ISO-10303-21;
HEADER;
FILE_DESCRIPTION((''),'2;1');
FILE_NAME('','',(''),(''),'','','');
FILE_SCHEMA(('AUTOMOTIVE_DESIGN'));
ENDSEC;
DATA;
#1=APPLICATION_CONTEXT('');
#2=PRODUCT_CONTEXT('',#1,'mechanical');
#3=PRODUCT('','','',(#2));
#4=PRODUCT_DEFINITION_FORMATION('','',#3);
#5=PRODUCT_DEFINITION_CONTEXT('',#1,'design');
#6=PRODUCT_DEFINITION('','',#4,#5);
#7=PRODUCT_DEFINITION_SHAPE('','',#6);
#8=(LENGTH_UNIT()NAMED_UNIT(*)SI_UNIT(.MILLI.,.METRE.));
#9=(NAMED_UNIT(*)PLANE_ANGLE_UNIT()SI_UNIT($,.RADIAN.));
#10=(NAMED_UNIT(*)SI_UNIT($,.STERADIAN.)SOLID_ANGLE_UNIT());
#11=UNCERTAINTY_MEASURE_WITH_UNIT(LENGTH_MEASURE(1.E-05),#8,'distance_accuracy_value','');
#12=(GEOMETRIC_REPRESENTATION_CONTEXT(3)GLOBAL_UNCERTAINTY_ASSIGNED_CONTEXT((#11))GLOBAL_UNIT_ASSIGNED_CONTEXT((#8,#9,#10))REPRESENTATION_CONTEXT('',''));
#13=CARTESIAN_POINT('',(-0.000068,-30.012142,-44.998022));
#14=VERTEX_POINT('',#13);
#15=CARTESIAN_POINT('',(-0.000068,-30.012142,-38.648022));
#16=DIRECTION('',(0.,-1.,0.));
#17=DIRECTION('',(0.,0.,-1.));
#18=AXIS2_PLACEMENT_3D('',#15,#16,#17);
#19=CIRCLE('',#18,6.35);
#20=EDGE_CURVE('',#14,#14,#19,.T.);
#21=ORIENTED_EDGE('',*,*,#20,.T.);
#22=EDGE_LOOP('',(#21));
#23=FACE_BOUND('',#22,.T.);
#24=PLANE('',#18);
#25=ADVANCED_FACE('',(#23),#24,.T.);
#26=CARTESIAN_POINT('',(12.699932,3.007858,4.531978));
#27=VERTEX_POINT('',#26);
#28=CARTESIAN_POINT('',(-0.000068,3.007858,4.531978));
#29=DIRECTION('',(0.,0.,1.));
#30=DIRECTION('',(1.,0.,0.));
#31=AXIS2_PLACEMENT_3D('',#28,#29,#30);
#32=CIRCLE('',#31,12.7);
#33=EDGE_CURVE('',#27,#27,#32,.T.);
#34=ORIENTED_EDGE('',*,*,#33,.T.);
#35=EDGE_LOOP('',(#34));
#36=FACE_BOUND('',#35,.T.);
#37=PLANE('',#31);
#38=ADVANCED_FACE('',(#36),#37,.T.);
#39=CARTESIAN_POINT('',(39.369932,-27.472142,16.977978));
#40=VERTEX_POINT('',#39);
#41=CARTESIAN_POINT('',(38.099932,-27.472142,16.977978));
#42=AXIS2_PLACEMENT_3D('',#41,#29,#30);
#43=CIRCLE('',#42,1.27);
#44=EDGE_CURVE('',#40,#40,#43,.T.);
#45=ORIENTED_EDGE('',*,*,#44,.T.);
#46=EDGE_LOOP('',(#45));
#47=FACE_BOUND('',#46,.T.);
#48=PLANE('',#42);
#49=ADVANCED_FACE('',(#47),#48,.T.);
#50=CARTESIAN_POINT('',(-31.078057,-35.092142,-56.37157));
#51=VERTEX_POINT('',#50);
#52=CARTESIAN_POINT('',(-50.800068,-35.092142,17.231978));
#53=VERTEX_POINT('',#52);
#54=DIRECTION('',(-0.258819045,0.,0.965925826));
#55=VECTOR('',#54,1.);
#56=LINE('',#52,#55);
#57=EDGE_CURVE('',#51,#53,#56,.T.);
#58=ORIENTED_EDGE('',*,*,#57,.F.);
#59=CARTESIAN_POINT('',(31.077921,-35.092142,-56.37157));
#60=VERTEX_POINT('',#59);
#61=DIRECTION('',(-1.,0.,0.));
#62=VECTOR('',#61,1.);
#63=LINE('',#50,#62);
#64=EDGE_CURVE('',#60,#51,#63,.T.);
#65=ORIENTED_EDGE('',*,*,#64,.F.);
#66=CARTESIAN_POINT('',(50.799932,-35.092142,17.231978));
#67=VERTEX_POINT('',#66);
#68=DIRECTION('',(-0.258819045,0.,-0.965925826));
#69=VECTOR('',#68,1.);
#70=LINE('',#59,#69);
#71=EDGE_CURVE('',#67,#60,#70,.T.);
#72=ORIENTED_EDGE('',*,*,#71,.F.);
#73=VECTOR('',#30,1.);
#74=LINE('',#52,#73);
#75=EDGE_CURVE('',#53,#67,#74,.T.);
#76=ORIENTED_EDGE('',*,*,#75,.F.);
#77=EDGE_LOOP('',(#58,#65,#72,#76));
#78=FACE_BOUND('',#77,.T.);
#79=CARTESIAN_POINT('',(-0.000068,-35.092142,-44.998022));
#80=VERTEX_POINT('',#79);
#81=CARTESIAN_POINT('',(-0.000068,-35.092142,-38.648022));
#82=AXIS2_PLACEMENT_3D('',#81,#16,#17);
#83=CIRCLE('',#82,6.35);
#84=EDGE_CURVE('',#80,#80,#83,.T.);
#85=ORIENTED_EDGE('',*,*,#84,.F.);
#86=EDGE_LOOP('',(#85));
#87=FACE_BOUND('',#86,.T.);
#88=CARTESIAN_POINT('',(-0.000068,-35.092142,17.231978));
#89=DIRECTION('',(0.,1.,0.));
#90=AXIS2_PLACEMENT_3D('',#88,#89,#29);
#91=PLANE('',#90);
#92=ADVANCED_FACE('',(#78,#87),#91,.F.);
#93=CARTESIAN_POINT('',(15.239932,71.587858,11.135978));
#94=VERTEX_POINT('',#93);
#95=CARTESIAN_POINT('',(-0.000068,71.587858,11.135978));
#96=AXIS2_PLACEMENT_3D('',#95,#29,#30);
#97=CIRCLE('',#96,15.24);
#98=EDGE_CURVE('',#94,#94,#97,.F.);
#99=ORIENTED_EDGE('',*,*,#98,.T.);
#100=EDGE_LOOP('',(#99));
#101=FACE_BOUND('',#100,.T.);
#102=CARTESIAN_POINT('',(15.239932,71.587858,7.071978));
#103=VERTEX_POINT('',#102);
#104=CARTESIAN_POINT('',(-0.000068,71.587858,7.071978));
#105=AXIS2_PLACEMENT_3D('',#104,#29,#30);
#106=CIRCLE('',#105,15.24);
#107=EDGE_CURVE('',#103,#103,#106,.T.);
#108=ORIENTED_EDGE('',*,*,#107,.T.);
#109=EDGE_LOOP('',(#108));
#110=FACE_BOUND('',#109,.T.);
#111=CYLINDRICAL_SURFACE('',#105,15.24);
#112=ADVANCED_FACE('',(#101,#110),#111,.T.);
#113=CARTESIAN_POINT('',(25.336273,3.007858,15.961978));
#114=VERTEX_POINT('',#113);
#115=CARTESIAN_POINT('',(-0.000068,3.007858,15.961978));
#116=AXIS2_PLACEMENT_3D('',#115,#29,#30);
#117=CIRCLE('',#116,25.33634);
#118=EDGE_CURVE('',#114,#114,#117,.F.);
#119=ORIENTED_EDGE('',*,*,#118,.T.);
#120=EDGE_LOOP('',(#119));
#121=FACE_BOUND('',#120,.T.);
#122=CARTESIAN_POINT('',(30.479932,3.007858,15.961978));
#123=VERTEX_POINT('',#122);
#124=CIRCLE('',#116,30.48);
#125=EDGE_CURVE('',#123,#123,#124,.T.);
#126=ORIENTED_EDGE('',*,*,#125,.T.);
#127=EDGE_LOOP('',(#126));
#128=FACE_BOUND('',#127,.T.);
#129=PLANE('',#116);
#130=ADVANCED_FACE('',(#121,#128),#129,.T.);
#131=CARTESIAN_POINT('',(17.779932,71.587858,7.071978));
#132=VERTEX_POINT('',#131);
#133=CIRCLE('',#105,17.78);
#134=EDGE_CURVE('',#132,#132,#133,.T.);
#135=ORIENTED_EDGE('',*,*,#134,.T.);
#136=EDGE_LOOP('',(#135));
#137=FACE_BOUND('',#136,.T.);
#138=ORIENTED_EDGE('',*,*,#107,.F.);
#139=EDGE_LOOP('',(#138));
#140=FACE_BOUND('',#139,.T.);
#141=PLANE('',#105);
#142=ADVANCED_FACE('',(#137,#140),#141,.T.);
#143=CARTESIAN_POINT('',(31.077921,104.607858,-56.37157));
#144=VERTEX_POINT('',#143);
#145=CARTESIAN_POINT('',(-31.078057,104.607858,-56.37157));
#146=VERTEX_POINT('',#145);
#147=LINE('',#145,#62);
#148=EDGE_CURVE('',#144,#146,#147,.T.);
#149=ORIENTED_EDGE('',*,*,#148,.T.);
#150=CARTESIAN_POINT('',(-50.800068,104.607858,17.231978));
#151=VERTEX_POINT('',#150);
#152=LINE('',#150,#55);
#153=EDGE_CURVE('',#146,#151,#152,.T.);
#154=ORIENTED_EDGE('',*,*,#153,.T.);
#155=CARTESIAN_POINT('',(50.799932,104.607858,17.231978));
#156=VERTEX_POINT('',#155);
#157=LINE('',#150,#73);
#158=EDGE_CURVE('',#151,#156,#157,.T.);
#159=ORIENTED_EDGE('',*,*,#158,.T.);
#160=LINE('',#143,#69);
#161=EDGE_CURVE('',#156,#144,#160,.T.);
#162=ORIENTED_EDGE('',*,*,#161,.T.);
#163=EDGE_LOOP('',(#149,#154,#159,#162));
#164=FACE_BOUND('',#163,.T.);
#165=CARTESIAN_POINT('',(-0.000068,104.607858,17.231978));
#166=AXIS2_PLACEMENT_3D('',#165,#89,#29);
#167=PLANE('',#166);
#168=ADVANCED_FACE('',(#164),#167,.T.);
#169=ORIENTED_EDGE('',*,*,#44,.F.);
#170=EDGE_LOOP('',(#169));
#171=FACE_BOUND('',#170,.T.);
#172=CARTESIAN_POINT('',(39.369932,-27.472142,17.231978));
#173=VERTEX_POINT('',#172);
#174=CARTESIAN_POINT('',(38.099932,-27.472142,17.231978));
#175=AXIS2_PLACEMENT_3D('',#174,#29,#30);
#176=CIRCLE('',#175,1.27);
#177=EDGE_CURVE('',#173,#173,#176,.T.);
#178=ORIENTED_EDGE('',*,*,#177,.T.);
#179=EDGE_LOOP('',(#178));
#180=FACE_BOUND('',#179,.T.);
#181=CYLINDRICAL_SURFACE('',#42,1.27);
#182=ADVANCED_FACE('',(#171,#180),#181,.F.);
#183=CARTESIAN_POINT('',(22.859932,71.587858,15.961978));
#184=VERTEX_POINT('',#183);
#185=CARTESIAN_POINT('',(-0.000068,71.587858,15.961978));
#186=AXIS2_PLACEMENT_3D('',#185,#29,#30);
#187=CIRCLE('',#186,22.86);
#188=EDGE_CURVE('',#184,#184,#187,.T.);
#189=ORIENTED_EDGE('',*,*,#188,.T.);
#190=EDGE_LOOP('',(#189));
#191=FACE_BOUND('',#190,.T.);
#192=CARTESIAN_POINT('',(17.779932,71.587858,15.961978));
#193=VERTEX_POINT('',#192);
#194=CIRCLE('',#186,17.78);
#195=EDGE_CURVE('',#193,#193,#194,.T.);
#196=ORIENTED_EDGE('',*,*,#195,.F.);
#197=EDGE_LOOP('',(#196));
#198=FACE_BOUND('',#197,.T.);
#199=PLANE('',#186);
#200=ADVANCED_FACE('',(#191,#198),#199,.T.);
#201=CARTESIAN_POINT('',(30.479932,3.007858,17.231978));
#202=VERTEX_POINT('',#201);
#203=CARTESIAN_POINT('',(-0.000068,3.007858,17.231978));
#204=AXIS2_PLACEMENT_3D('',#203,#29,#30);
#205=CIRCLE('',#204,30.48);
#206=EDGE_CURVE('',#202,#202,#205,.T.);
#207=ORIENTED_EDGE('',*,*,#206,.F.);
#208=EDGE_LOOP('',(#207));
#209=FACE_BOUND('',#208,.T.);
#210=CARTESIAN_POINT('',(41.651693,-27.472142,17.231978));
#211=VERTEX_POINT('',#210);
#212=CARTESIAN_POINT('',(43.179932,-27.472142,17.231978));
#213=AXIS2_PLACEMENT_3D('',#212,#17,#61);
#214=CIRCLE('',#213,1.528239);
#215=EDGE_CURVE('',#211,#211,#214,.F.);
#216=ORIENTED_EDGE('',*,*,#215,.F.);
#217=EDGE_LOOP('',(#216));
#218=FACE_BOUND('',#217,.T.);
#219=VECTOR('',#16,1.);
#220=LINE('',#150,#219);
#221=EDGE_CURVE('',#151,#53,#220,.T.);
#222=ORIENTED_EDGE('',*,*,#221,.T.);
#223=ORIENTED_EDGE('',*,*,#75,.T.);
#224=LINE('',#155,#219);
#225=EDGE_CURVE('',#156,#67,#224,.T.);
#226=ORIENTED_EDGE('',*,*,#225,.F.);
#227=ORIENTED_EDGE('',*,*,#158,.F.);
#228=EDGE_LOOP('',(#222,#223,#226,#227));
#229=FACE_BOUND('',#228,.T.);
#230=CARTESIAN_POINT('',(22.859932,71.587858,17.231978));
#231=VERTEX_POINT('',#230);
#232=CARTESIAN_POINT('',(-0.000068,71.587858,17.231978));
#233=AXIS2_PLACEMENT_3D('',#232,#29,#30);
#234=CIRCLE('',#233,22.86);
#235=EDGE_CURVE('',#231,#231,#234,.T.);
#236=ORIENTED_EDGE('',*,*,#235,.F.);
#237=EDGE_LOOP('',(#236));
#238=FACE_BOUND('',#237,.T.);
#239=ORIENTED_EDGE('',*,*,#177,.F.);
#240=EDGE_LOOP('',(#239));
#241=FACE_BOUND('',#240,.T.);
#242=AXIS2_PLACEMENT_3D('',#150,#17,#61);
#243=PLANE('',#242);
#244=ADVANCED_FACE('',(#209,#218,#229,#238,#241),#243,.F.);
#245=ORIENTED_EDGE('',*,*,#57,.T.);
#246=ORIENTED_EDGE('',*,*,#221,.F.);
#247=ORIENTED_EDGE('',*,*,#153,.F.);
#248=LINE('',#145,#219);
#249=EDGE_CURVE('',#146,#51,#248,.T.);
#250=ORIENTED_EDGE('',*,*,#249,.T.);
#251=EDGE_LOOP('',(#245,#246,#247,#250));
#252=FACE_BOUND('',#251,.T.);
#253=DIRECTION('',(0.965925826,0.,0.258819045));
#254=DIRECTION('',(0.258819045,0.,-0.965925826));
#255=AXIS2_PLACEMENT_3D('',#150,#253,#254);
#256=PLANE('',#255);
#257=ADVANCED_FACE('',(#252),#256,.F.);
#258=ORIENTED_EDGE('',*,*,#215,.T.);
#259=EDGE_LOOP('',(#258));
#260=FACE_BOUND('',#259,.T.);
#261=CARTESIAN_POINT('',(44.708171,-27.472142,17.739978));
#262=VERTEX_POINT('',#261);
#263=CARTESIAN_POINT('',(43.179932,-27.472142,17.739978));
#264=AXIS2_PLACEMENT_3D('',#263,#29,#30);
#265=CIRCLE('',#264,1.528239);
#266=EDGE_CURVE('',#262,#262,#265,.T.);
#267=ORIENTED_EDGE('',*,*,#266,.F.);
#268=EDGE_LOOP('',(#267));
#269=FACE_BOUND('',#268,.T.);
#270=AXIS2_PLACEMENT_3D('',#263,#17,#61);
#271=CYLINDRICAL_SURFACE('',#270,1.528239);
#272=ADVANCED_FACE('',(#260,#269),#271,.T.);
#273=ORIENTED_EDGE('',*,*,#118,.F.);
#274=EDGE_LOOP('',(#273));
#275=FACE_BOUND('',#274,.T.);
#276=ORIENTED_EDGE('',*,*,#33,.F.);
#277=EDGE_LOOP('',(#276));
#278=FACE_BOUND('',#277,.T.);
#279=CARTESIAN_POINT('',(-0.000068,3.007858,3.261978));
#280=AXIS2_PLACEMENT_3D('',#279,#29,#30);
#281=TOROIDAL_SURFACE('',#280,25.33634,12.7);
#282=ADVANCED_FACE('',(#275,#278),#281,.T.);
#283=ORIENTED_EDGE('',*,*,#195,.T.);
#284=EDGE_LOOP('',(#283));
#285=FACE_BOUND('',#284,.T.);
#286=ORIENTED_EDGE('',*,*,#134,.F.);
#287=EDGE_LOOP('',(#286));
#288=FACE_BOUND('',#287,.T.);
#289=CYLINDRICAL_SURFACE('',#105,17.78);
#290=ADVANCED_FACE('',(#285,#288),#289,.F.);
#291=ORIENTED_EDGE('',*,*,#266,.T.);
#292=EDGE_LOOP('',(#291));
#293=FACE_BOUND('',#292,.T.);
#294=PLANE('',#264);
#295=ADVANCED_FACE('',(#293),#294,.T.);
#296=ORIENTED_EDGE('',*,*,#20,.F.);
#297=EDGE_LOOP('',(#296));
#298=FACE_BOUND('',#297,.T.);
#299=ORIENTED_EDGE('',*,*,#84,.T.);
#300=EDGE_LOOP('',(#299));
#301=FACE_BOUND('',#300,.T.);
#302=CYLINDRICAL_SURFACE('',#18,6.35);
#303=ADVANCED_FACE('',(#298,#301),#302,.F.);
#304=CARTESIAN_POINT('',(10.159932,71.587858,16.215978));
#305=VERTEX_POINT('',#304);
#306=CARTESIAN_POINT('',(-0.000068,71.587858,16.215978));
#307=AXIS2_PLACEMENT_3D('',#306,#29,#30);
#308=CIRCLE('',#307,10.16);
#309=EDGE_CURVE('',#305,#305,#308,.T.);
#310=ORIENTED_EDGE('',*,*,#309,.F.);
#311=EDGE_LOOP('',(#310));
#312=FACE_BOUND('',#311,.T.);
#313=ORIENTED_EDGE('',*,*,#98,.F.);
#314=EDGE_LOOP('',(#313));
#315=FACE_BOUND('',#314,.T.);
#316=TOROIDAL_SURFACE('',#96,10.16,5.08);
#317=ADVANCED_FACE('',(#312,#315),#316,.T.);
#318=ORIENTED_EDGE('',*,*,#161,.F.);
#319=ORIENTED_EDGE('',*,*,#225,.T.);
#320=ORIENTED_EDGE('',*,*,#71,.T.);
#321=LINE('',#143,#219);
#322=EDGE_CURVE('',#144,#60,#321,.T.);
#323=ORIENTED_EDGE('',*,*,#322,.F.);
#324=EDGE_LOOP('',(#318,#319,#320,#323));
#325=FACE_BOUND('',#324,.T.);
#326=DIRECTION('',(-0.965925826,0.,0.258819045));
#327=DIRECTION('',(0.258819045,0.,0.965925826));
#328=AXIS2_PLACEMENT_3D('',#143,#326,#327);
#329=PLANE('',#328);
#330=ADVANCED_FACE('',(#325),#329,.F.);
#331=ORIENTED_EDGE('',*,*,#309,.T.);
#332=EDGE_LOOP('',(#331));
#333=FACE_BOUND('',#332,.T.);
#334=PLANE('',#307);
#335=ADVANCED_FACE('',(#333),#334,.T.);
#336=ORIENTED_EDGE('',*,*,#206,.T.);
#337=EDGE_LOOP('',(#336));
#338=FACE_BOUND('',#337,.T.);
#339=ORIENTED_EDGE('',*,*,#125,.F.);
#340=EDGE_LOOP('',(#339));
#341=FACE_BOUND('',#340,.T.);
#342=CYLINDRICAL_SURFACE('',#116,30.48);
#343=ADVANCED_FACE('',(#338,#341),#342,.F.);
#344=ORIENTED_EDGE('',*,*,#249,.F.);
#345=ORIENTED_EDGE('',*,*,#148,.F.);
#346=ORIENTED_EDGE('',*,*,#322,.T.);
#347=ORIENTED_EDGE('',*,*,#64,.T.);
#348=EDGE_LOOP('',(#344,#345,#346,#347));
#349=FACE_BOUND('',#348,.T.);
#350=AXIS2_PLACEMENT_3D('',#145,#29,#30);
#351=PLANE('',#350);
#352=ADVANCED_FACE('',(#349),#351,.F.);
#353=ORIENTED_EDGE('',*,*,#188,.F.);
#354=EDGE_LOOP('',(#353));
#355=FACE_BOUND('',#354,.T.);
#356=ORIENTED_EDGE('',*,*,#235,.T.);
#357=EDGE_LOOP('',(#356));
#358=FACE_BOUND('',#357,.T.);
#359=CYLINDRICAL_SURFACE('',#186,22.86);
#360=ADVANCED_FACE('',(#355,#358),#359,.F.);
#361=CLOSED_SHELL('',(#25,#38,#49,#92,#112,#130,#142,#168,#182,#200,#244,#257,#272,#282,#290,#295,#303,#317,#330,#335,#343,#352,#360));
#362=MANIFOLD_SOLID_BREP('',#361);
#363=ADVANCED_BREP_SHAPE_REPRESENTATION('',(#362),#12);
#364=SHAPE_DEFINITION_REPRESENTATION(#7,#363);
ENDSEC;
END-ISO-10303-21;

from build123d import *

# Parameters (mm, degrees)
BOSS_EXTRUDE1_DEPTH = 69.85
SKETCH3_R           = 11.43
SKETCH3_R_2         = 8.89
CUT_EXTRUDE1_DEPTH  = 0.635
SKETCH3_4_R         = 8.89
SKETCH3_4_R_2       = 7.62
CUT_EXTRUDE2_DEPTH  = 5.08
SKETCH3_5_R         = 7.62
CUT_EXTRUDE3_DEPTH  = 0.508
FILLET1_R           = 2.54
SKETCH3_6_R         = 15.24
SKETCH3_6_R_2       = 6.35
CUT_EXTRUDE4_DEPTH  = 0.635
SKETCH3_7_R         = 6.35
CUT_EXTRUDE5_DEPTH  = 6.35
FILLET5_R           = 6.35
SKETCH7_R           = 0.764119483
BOSS_EXTRUDE3_DEPTH = 0.254
SKETCH7_4_R         = 0.635
CUT_EXTRUDE6_DEPTH  = 0.127
SKETCH8_R           = 3.175
CUT_EXTRUDE7_DEPTH  = 2.54
SCALE1_SCALE        = 2


with BuildPart() as part:
    # Sketch1 → Boss-Extrude1 (new body)
    with BuildSketch(Plane(origin=(0, 0, 0), x_dir=(1, 0, 0), z_dir=(0, 1, 0))):
        Polygon((-25.4, 0), (25.4, 0), (15.538994382, 36.801773982), (-15.538994382, 36.801773982), align=None)
    extrude(amount=BOSS_EXTRUDE1_DEPTH)

    # Sketch3 → Cut-Extrude1 (cut)
    with BuildSketch(Plane.XY):
        with Locations((0, 53.34)):
            Circle(SKETCH3_R)
        with Locations((0, 53.34)):
            Circle(SKETCH3_R_2, mode=Mode.SUBTRACT)
    extrude(amount=-CUT_EXTRUDE1_DEPTH, mode=Mode.SUBTRACT)

    # Sketch3<4> → Cut-Extrude2 (cut)
    with BuildSketch(Plane.XY):
        with Locations((0, 53.34)):
            Circle(SKETCH3_4_R)
        with Locations((0, 53.34)):
            Circle(SKETCH3_4_R_2, mode=Mode.SUBTRACT)
    extrude(amount=-CUT_EXTRUDE2_DEPTH, mode=Mode.SUBTRACT)

    # Sketch3<5> → Cut-Extrude3 (cut)
    with BuildSketch(Plane.XY):
        with Locations((0, 53.34)):
            Circle(SKETCH3_5_R)
    extrude(amount=-CUT_EXTRUDE3_DEPTH, mode=Mode.SUBTRACT)

    # Fillet1
    fillet1_edges = [part.edges().sort_by_distance(p)[0] for p in [
        (-7.62, 53.34, -0.508),
    ]]
    fillet(fillet1_edges, radius=FILLET1_R)

    # Sketch3<6> → Cut-Extrude4 (cut)
    with BuildSketch(Plane.XY):
        with Locations((0, 19.05)):
            Circle(SKETCH3_6_R)
        with Locations((0, 19.05)):
            Circle(SKETCH3_6_R_2, mode=Mode.SUBTRACT)
    extrude(amount=-CUT_EXTRUDE4_DEPTH, mode=Mode.SUBTRACT)

    # Sketch3<7> → Cut-Extrude5 (cut)
    with BuildSketch(Plane.XY):
        with Locations((0, 19.05)):
            Circle(SKETCH3_7_R)
    extrude(amount=-CUT_EXTRUDE5_DEPTH, mode=Mode.SUBTRACT)

    # Fillet5
    # the kernel refuses this fillet: 6.35 mm, written as the material it takes off along each edge
    with BuildSketch(Plane(origin=(0, 19.05, -0.635), x_dir=(1, 0, 0), z_dir=(0, -1, 0))) as fillet5_piece_1:
        with BuildLine():
            CenterArc((12.668170226, -6.35), FILLET5_R, 90, 84.260829523)
            Line((6.35, -5.715), (6.223636595, -5.7023))
            ThreePointArc((6.223636595, -5.7023), (6.223, -2.8575), (6.223, 0))
            Line((6.223, 0), (6.35, 0.127))
            Line((6.35, 0.127), (12.668170226, 0.127))
            Line((12.668170226, 0.127), (12.668170226, 0))
        make_face()
    revolve(axis=Axis((0, 19.05, -0.635), (0, 0, 1)), mode=Mode.SUBTRACT)

    # Sketch7 → Boss-Extrude3 (add)
    with BuildSketch(Plane.XY):
        with Locations(Location((21.59, 3.81, 0), (0, 0, 180))):
            Circle(SKETCH7_R)
    extrude(amount=BOSS_EXTRUDE3_DEPTH)

    # Sketch7<4> → Cut-Extrude6 (cut)
    with BuildSketch(Plane.XY):
        with Locations((19.05, 3.81)):
            Circle(SKETCH7_4_R)
    extrude(amount=-CUT_EXTRUDE6_DEPTH, mode=Mode.SUBTRACT)

    # Sketch8 → Cut-Extrude7 (cut)
    with BuildSketch(Plane.XZ):
        with Locations(Location((0, -27.94, 0), (0, 0, 270))):
            Circle(SKETCH8_R)
    extrude(amount=-CUT_EXTRUDE7_DEPTH, mode=Mode.SUBTRACT)


with BuildPart() as part_1:
    # Scale1: scaled about (6.7929e-05, 35.092141807, -17.231977993)
    add(part.part.scale(SCALE1_SCALE).moved(Location((-6.7929e-05, -35.092141807, 17.231977993))))


solid = part_1.part
